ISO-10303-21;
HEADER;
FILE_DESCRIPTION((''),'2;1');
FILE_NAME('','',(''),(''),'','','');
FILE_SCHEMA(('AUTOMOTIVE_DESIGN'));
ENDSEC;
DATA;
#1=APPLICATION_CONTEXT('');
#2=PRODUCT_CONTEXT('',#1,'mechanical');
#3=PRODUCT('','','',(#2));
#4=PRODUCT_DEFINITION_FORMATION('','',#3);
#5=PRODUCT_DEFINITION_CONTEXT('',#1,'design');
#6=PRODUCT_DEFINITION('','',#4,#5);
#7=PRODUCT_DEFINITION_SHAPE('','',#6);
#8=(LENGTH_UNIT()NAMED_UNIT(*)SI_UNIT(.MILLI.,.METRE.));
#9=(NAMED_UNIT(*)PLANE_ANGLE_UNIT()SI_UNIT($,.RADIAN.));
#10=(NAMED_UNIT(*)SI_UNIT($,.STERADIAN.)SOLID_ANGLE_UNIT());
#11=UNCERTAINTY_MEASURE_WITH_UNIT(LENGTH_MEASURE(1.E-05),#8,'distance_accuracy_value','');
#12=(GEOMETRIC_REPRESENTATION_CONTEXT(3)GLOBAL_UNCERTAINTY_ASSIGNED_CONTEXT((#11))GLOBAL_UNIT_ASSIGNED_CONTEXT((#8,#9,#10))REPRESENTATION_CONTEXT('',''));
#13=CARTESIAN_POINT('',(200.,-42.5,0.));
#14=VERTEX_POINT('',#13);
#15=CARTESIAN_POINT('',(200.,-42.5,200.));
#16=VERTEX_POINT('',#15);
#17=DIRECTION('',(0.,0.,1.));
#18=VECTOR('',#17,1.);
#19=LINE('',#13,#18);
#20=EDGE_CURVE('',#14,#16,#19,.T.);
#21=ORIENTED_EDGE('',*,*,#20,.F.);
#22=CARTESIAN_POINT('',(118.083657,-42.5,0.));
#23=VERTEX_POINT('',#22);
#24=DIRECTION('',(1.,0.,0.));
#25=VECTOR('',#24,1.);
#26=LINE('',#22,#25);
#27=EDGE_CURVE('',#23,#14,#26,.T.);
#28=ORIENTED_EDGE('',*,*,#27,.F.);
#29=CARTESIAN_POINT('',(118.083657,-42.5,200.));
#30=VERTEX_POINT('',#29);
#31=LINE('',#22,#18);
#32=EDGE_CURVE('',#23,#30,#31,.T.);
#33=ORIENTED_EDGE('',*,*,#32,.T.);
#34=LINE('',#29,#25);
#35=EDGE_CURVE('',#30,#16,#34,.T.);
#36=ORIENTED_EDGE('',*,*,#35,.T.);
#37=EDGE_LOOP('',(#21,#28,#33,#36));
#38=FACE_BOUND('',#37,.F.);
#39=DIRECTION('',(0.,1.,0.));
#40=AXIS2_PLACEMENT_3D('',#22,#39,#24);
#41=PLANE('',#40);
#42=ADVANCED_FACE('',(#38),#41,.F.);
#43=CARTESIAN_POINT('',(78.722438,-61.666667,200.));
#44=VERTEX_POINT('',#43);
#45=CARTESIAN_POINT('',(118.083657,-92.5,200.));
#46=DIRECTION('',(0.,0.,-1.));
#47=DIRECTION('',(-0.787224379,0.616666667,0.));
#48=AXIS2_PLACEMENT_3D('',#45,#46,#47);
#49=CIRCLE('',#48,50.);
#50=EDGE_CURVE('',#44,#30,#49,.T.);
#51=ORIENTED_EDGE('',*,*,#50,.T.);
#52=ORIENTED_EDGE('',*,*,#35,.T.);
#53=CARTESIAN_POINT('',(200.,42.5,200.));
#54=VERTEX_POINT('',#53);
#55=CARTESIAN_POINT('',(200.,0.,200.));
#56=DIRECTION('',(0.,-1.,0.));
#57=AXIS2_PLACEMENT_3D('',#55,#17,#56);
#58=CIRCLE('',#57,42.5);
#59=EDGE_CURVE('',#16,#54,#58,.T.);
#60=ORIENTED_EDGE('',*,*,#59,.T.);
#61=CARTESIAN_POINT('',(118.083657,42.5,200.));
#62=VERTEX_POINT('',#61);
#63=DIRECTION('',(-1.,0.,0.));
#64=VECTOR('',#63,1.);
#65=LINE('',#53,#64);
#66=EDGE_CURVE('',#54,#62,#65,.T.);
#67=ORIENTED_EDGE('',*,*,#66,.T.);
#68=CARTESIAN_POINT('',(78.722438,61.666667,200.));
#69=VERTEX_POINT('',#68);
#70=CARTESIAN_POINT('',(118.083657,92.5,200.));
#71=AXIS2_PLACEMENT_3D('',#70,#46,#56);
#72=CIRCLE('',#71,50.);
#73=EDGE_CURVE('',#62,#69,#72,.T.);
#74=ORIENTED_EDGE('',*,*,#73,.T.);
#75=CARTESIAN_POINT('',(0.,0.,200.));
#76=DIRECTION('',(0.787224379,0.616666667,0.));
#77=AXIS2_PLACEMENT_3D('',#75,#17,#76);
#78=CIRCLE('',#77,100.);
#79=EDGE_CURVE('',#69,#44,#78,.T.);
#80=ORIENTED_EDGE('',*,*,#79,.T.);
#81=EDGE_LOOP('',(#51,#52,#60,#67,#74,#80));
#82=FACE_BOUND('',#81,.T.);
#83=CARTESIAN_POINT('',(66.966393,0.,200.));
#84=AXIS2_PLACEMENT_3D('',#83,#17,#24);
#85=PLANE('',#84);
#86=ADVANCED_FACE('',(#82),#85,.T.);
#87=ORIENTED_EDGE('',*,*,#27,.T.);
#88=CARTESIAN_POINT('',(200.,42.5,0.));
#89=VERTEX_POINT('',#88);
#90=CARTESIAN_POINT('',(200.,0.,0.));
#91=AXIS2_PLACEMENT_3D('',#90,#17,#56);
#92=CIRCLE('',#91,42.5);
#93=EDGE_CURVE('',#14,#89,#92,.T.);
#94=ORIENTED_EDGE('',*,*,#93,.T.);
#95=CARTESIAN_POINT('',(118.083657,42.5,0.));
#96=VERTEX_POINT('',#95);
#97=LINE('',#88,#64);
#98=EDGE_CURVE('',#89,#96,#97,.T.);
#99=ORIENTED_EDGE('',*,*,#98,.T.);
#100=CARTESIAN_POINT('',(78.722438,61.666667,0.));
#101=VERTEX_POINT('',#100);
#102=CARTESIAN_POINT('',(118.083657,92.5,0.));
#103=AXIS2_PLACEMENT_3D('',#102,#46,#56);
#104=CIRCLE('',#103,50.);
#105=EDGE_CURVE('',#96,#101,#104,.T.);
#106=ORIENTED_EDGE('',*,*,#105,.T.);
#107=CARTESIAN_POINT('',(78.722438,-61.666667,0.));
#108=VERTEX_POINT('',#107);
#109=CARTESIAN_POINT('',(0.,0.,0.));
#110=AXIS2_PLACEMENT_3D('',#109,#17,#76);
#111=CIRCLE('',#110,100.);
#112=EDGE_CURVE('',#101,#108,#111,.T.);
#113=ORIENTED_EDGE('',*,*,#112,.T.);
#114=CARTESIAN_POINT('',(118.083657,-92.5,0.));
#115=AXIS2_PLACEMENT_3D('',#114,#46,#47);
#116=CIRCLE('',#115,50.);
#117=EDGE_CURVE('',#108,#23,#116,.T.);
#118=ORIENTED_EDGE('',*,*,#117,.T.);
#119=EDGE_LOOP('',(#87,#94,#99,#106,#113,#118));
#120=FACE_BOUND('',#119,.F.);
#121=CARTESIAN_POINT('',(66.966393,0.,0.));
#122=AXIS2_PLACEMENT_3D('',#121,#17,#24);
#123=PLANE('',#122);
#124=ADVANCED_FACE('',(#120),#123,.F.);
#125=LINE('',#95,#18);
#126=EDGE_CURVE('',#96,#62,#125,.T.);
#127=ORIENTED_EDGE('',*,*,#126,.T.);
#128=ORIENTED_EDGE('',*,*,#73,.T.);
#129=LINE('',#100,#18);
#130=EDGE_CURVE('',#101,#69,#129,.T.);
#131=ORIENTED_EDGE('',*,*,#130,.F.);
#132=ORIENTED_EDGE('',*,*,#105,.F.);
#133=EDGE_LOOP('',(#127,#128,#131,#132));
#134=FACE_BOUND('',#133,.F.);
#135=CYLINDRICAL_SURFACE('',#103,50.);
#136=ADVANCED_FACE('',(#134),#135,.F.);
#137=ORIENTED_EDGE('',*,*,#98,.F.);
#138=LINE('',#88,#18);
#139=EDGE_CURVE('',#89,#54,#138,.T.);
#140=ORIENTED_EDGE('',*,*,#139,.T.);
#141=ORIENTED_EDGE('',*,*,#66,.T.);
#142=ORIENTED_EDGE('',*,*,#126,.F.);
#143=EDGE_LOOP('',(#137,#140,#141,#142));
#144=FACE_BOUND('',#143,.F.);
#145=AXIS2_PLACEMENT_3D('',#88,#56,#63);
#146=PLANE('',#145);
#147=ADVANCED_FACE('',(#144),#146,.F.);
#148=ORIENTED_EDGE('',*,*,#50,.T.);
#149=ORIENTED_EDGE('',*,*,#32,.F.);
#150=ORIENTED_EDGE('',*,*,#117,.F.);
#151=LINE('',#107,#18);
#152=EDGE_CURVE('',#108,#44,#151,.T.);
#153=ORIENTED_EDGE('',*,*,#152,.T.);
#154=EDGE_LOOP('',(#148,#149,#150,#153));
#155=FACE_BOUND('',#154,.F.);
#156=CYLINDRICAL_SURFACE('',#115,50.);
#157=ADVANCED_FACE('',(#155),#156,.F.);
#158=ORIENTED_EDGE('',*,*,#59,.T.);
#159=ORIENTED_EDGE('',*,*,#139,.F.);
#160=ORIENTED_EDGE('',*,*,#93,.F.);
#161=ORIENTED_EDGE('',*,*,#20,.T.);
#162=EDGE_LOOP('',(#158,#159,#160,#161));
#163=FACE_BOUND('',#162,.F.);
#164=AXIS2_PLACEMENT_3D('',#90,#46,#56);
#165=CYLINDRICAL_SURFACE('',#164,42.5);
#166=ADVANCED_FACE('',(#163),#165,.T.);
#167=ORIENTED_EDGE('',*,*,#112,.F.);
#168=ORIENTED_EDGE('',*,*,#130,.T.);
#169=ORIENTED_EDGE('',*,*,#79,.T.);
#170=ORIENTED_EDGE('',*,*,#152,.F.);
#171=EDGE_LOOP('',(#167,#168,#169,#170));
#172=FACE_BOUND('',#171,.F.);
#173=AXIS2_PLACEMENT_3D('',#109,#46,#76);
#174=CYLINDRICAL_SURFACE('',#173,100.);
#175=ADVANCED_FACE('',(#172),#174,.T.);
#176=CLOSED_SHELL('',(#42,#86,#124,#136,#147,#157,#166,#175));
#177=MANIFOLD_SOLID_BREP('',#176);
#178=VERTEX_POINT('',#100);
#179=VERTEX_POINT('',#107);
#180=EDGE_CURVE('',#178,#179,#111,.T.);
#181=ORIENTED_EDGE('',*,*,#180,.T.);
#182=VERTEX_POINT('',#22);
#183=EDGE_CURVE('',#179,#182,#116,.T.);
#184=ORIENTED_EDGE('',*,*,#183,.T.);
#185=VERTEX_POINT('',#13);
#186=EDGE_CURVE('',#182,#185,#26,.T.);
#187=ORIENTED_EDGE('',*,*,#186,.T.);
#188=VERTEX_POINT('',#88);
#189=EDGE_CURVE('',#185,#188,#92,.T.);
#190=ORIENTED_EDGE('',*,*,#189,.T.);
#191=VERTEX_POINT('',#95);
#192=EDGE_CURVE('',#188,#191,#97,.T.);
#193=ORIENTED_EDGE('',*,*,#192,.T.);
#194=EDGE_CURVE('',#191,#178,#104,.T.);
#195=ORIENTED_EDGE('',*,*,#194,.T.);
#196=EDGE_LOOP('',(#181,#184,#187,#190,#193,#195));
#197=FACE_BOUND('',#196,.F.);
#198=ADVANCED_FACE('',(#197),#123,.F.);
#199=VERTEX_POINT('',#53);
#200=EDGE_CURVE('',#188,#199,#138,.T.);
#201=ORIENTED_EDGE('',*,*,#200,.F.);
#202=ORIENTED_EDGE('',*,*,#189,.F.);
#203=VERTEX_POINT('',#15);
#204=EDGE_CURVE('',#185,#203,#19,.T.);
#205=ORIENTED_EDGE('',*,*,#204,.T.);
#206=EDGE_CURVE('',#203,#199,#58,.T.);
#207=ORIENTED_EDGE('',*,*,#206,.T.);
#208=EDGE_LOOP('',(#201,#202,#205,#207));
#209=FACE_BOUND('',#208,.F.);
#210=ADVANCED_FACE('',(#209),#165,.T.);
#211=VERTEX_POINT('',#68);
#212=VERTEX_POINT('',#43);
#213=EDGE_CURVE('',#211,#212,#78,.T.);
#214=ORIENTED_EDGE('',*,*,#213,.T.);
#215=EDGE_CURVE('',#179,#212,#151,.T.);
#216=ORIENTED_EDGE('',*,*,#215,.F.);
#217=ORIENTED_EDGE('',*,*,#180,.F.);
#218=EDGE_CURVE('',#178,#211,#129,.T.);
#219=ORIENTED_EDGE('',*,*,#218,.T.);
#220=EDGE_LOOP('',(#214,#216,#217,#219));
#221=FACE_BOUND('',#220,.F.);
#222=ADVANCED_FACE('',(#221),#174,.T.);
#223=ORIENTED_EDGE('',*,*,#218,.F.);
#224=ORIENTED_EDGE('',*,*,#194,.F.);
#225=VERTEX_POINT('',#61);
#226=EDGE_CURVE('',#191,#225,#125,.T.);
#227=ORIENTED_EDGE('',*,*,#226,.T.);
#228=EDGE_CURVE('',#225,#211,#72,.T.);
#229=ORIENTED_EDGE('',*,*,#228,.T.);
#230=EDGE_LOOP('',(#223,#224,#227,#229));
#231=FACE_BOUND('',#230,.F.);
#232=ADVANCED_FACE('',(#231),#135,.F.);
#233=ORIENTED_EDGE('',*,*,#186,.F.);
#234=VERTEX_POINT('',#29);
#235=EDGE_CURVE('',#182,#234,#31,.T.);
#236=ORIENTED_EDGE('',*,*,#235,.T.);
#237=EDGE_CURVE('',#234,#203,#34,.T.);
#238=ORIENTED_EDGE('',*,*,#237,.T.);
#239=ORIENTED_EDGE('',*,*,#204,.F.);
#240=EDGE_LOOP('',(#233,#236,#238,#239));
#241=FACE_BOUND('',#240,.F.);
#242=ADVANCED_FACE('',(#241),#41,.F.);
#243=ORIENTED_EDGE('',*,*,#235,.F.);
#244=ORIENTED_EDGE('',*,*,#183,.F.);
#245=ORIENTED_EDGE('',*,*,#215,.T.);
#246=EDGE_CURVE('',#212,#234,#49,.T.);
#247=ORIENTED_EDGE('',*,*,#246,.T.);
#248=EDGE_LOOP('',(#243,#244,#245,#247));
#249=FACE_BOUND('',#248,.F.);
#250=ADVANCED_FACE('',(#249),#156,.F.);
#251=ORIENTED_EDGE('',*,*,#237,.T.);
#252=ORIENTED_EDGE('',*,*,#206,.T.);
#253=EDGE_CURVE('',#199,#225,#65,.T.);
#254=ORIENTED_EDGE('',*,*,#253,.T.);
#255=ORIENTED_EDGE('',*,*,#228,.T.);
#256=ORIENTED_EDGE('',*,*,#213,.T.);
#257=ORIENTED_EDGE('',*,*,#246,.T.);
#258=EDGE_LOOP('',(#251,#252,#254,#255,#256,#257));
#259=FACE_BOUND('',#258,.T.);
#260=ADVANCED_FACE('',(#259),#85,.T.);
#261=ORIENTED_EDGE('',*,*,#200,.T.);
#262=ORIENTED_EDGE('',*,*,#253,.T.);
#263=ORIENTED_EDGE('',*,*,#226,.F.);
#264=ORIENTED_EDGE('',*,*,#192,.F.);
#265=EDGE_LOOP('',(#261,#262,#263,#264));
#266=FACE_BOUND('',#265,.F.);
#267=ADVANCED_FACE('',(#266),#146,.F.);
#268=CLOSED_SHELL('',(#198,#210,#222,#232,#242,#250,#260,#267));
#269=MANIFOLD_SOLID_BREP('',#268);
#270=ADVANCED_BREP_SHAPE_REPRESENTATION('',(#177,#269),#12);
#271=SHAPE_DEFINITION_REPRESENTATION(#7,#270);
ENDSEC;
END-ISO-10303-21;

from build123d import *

# Parameters (mm, degrees)
F2_DEPTH = 200


# Not quite as in the source:
# - a feature of the source that left no trace in its solid (it failed there, or was rolled back) is left out


with BuildPart() as f2:
    # F1 (on face) → F2 (new body)
    with BuildSketch(Plane.XY):
        with BuildLine():
            Line((200, 42.5), (118.0836567862, 42.5))
            ThreePointArc((118.0836567862, 42.5), (96.1937808919, 47.5463201358), (78.7224378575, 61.6666666667))
            ThreePointArc((78.7224378575, 61.6666666667), (-100, 0), (78.7224378575, -61.6666666667))
            ThreePointArc((78.7224378575, -61.6666666667), (96.1937808919, -47.5463201358), (118.0836567862, -42.5))
            Line((118.0836567862, -42.5), (200, -42.5))
            ThreePointArc((200, -42.5), (242.5, 0), (200, 42.5))
        make_face()
    extrude(amount=F2_DEPTH)


with BuildPart() as f2b:
    # F0 (on Top) → F2, piece 2 (new body)
    with BuildSketch(Plane.XY):
        with BuildLine():
            ThreePointArc((118.0836567862, 42.5), (96.1937808919, 47.5463201358), (78.7224378575, 61.6666666667))
            ThreePointArc((78.7224378575, 61.6666666667), (-100, 0), (78.7224378575, -61.6666666667))
            ThreePointArc((78.7224378575, -61.6666666667), (96.1937808919, -47.5463201358), (118.0836567862, -42.5))
            Line((118.0836567862, -42.5), (200, -42.5))
            ThreePointArc((200, -42.5), (242.5, 0), (200, 42.5))
            Line((200, 42.5), (118.0836567862, 42.5))
        make_face()
    extrude(amount=F2_DEPTH)


solid = Compound([f2.part, f2b.part])
